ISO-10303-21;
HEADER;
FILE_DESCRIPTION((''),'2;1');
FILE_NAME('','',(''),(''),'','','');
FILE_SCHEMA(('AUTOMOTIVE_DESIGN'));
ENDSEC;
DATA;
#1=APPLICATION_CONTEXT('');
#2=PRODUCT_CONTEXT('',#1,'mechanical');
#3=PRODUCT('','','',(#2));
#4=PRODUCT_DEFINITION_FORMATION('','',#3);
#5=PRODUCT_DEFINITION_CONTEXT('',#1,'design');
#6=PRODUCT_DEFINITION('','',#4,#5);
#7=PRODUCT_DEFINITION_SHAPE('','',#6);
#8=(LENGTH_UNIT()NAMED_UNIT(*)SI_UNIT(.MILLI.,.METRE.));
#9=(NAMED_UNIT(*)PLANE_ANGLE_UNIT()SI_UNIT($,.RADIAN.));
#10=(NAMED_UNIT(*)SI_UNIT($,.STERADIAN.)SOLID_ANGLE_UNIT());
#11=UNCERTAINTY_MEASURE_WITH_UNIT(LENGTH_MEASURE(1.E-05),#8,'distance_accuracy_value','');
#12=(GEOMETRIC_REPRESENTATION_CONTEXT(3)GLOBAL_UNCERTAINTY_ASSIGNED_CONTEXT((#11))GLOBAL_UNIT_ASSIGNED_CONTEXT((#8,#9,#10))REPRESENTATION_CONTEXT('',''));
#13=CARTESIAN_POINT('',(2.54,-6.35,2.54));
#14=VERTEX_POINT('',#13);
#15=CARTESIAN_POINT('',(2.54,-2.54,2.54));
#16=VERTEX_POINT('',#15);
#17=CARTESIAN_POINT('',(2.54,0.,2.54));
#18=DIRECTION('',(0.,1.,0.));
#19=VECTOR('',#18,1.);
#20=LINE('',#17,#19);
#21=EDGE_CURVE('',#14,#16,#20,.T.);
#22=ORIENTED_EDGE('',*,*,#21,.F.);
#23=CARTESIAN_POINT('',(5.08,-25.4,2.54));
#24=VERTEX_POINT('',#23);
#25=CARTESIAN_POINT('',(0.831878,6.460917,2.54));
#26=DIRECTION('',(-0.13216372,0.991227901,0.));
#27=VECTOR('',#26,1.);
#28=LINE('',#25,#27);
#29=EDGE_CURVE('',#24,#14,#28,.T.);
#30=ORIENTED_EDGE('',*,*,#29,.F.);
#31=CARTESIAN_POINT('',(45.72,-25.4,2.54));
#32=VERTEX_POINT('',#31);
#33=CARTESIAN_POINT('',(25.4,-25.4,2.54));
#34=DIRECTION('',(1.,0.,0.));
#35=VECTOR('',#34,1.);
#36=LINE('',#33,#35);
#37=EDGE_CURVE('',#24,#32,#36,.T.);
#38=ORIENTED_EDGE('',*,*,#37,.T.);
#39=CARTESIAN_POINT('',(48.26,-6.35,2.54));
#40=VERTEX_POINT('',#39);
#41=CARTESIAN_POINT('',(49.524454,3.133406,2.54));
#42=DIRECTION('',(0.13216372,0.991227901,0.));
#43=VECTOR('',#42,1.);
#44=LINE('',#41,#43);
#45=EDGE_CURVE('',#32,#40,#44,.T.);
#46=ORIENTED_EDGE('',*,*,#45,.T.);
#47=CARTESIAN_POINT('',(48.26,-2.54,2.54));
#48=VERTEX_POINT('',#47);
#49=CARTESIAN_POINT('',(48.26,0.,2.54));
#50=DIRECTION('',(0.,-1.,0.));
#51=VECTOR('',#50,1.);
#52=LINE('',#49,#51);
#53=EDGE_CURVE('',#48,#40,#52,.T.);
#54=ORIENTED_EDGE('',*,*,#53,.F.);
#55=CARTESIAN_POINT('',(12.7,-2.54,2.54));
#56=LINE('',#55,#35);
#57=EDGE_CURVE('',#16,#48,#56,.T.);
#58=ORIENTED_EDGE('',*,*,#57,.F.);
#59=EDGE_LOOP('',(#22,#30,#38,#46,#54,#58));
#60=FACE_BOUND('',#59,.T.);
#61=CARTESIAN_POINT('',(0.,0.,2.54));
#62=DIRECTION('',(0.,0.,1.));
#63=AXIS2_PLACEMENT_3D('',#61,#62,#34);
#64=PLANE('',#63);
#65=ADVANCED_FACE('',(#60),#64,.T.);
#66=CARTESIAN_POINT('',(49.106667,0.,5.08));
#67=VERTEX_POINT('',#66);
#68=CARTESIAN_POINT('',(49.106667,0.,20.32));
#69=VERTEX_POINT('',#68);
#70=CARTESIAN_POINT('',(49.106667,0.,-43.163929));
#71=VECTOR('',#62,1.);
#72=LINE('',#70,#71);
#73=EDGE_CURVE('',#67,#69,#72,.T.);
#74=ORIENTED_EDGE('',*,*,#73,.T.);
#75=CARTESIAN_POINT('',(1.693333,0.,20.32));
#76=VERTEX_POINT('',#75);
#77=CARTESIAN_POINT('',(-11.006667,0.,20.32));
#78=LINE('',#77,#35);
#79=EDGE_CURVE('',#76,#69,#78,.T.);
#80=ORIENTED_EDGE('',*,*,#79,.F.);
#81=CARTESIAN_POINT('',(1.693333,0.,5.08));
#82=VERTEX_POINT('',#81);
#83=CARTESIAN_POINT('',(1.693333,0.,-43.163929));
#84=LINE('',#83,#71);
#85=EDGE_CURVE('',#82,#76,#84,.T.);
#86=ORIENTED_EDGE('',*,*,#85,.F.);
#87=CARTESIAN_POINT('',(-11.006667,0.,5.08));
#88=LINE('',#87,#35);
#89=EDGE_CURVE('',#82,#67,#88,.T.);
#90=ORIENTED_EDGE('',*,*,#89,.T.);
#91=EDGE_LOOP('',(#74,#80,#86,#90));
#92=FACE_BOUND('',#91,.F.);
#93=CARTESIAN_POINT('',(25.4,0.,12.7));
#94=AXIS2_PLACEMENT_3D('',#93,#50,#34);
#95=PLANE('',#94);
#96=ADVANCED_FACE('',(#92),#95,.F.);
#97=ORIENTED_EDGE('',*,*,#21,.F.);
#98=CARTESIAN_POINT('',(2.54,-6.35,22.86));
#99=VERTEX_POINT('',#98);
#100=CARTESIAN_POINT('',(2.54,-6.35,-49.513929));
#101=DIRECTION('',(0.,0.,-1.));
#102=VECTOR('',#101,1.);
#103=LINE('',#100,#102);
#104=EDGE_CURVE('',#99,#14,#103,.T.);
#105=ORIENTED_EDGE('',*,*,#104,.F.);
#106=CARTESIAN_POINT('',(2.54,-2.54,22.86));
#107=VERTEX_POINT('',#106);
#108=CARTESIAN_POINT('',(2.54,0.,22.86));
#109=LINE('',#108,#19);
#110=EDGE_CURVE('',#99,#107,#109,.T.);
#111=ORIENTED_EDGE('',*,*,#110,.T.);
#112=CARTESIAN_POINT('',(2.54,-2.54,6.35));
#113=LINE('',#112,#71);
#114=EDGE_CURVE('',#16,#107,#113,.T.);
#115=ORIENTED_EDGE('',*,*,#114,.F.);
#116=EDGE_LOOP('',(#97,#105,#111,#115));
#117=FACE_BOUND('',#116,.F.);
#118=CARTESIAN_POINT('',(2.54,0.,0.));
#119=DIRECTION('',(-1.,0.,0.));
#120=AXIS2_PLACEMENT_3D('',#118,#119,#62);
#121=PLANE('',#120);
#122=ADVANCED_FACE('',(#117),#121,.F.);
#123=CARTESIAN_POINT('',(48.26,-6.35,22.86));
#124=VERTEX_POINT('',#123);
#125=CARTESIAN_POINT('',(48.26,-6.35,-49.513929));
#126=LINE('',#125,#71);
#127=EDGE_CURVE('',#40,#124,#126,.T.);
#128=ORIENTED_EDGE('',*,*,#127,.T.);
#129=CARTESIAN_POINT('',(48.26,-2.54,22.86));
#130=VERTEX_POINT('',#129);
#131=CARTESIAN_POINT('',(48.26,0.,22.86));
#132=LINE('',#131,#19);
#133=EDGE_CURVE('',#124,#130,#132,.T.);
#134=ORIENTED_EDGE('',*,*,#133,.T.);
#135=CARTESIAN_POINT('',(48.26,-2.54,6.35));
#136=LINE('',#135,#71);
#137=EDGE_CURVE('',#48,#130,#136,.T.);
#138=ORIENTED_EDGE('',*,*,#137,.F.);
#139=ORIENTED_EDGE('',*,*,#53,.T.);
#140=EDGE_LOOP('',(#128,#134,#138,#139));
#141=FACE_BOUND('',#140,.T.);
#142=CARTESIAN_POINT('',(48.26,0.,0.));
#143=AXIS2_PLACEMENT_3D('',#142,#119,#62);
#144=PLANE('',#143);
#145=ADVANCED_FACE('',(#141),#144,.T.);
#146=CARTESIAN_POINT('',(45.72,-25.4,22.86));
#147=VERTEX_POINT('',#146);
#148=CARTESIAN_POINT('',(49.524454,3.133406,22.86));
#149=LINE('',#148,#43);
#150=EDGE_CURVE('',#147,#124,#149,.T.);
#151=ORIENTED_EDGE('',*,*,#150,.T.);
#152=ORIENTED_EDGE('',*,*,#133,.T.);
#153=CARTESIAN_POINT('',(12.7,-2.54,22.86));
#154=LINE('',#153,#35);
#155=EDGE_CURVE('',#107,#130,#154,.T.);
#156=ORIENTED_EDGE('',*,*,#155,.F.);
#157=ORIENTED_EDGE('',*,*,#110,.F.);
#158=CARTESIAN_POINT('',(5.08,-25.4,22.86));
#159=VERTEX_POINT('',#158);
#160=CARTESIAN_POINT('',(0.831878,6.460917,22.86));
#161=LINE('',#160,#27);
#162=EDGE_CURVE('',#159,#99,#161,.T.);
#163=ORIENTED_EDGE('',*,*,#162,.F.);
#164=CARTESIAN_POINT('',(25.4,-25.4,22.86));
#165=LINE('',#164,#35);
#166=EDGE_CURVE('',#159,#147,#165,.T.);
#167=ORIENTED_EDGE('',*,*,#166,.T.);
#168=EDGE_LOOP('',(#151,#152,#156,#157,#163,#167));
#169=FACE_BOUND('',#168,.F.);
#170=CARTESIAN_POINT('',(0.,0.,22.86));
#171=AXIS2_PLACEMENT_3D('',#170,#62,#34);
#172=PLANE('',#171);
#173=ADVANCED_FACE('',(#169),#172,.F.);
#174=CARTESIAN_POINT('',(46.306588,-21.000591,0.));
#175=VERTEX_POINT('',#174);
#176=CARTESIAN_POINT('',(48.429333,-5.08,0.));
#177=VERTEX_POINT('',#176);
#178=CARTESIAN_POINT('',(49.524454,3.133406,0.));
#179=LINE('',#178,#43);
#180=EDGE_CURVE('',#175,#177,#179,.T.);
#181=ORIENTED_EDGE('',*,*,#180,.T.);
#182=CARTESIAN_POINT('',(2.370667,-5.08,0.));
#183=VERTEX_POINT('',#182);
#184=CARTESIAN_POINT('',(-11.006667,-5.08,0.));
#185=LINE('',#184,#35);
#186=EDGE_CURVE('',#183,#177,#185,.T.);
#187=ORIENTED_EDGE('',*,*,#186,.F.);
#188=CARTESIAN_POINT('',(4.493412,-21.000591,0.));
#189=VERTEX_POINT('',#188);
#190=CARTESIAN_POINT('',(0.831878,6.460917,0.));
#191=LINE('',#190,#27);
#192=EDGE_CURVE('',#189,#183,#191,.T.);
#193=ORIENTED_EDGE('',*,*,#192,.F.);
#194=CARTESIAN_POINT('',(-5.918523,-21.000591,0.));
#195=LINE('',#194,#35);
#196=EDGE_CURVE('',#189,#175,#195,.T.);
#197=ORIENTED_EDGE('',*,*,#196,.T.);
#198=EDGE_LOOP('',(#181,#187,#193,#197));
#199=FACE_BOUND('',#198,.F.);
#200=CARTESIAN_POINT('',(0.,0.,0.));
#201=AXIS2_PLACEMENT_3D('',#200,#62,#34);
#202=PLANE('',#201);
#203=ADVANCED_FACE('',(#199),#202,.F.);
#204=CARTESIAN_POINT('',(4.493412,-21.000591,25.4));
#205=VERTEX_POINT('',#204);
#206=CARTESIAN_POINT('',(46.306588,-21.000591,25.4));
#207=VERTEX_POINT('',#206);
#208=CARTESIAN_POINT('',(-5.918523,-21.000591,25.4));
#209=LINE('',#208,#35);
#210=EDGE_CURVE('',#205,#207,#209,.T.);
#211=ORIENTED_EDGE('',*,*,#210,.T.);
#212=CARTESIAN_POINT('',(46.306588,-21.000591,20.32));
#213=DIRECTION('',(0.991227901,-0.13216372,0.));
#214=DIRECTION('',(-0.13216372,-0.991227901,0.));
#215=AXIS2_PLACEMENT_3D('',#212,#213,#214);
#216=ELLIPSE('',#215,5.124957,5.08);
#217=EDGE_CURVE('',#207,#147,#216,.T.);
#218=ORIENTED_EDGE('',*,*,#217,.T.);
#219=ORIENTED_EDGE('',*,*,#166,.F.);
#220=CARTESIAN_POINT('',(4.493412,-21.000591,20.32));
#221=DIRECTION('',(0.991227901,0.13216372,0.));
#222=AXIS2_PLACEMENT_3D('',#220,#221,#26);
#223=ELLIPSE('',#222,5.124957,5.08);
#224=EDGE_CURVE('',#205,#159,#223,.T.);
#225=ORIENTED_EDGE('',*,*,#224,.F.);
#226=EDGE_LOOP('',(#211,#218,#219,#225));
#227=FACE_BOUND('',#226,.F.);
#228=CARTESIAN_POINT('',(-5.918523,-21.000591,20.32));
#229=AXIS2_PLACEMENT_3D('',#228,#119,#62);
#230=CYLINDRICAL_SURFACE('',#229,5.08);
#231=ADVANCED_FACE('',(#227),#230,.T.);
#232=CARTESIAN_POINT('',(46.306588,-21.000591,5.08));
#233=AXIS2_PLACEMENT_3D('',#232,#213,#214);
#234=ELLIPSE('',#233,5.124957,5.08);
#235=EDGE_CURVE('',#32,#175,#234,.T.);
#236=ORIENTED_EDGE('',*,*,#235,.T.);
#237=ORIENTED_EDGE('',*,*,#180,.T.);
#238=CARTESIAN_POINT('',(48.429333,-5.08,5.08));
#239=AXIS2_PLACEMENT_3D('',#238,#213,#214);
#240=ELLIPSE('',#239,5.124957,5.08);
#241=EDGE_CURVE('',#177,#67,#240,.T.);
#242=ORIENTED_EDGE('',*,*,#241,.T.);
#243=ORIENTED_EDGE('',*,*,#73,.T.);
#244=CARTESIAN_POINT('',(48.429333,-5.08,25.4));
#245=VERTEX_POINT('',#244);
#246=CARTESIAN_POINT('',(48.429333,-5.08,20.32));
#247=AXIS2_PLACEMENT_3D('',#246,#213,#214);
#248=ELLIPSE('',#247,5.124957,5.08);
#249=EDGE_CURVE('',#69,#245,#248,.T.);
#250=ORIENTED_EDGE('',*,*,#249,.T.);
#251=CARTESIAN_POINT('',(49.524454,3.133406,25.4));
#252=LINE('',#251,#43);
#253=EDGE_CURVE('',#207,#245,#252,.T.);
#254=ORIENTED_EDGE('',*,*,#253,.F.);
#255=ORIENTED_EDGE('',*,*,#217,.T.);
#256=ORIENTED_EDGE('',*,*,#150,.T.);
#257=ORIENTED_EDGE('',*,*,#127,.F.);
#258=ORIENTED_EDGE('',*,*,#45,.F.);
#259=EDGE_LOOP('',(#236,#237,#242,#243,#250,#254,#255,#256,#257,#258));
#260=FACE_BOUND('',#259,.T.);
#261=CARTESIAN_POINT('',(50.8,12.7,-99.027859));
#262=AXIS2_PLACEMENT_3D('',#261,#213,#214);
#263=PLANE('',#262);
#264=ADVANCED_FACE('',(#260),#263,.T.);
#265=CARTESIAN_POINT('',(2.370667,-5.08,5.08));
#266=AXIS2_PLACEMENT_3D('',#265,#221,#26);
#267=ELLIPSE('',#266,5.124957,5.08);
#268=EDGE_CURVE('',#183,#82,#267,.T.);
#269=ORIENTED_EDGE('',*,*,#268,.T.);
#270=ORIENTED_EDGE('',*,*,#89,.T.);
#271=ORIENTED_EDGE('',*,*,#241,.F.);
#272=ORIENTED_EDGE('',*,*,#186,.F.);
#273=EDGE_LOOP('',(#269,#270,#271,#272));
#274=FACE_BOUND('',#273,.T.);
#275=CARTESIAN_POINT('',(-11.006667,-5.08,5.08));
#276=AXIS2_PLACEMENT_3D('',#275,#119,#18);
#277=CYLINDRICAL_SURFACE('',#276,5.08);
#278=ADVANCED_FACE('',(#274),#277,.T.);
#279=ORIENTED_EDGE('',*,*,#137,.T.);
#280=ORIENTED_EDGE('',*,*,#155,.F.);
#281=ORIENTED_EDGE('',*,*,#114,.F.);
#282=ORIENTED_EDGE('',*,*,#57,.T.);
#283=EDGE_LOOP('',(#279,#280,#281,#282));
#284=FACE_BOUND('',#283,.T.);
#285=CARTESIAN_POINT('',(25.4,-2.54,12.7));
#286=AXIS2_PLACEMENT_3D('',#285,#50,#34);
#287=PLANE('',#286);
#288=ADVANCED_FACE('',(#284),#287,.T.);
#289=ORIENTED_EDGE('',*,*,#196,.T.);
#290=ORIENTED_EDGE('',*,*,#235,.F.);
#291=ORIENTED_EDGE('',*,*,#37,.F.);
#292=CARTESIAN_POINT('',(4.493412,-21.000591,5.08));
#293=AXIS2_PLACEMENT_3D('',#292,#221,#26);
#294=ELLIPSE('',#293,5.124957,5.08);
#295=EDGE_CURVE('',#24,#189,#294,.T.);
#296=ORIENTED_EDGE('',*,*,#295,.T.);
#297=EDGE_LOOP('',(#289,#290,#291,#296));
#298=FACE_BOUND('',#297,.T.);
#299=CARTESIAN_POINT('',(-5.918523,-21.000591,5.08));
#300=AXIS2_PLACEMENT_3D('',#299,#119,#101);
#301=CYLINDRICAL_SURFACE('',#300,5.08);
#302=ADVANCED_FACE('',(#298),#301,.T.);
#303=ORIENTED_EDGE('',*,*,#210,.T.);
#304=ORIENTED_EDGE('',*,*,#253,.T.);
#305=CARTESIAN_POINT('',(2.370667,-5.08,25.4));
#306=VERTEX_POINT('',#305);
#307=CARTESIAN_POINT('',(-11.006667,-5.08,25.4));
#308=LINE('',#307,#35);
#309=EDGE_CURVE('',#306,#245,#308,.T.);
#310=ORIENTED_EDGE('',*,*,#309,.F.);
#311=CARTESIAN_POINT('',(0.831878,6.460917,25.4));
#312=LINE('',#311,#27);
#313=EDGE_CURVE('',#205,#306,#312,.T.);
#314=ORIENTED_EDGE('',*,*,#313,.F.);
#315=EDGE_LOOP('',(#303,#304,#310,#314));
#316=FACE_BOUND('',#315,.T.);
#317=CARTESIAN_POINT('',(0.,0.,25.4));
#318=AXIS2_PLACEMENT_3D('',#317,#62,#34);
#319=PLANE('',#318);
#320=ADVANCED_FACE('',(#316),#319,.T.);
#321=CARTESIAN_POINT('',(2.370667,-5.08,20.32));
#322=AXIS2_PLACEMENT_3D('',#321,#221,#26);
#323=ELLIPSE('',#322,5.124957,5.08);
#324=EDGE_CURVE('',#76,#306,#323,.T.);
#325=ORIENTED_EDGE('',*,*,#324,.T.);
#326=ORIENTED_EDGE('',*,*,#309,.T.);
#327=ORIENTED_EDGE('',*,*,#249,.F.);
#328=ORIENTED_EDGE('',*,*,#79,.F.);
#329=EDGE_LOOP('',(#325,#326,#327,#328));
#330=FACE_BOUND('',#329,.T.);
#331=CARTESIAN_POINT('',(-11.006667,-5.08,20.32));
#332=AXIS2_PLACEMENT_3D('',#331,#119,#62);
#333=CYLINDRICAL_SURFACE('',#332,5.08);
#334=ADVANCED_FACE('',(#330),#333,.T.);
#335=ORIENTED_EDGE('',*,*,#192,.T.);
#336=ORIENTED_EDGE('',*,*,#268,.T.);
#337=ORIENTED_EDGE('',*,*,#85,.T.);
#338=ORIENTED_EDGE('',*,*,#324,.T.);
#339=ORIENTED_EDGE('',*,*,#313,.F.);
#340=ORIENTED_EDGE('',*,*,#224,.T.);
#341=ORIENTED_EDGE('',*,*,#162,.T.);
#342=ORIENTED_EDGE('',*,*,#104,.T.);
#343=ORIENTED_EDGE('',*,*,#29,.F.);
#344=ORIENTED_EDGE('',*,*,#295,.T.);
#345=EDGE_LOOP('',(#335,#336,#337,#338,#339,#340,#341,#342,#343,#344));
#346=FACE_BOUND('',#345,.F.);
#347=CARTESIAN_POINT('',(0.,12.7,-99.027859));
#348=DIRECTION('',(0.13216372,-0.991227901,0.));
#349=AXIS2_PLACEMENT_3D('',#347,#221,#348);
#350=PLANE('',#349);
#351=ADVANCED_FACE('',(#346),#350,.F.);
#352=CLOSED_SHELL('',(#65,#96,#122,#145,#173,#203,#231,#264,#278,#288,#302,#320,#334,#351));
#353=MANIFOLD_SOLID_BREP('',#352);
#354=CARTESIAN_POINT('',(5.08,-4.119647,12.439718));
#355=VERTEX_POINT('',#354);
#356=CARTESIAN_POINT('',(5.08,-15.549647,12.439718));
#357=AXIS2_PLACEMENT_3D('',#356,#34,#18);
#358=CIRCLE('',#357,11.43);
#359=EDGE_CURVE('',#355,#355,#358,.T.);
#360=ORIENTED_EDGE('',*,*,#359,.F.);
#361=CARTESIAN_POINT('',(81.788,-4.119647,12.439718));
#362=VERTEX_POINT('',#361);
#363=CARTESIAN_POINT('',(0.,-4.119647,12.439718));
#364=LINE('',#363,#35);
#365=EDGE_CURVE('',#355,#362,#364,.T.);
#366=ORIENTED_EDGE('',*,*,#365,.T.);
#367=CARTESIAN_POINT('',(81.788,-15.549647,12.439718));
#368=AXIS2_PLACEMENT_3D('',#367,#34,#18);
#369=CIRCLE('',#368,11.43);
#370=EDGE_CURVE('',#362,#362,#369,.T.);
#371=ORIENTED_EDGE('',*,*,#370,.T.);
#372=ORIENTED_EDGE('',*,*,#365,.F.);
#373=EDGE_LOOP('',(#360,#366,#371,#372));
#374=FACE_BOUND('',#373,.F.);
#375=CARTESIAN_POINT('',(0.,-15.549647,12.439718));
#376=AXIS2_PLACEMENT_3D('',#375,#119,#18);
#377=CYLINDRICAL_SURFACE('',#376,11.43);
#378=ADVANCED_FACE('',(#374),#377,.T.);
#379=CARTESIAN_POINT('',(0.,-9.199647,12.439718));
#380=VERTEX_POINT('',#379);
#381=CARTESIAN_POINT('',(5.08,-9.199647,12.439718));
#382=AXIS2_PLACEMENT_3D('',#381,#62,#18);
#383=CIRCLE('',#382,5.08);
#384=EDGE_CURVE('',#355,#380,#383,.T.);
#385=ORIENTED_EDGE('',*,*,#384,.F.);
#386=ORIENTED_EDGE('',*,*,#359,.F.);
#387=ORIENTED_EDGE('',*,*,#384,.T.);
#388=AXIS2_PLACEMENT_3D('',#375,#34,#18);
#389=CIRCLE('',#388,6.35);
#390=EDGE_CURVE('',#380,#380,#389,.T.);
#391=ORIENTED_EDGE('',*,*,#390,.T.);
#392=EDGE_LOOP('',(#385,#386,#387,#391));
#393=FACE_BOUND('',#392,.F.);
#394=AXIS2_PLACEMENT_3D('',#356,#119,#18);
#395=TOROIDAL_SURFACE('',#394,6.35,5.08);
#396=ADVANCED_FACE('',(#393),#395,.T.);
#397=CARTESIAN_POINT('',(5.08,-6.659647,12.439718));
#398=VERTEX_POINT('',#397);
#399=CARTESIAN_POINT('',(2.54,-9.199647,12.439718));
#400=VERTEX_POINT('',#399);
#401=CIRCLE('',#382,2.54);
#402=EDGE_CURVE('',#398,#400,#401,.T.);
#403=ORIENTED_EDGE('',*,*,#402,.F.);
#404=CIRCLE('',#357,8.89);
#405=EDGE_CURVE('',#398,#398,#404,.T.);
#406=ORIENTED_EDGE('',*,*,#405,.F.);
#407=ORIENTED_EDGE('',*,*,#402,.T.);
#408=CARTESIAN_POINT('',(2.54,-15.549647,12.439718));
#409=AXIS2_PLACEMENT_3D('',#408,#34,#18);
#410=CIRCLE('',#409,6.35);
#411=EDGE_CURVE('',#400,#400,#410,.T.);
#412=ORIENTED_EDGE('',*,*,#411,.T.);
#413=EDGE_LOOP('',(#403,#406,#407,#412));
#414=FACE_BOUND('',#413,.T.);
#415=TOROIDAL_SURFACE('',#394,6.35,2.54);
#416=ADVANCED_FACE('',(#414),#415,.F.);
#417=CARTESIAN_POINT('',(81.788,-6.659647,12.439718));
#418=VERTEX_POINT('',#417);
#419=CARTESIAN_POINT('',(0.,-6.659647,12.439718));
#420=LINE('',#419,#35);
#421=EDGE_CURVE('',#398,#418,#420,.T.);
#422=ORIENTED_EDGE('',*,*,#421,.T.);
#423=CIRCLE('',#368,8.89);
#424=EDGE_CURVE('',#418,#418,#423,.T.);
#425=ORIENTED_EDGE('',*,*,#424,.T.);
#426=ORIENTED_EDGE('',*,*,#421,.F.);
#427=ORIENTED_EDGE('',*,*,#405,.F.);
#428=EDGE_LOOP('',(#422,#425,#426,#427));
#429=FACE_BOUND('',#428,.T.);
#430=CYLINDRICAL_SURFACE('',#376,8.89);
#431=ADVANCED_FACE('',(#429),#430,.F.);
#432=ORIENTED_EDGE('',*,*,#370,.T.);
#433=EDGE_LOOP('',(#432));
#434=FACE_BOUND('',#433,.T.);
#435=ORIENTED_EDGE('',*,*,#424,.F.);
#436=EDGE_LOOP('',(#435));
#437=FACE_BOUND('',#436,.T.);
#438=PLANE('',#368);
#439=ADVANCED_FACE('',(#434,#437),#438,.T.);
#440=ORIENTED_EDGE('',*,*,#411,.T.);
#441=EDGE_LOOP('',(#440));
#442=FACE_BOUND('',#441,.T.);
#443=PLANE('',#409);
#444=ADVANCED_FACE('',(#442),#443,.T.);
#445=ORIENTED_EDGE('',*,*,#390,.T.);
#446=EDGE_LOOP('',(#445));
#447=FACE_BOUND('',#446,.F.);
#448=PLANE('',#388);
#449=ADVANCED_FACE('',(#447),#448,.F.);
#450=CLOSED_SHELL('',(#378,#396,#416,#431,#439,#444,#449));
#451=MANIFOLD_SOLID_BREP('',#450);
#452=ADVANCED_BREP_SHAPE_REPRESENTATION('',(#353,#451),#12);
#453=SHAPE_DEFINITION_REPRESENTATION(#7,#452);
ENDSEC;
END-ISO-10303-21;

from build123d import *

# Parameters (mm, degrees)
F0_W        = 50.8
F0_H        = 25.4
F1_DEPTH    = 25.4
F2_T        = -2.54
F3_T1_DEPTH = 223.4557170743
F4_T1_DEPTH = 72.8133333333
F4_T3_DEPTH = 62.6370452561
F5_R        = 11.43
F6_DEPTH    = 81.788
F7_R        = 5.08
F8_T        = -2.54


# Not quite as in the source:
# - a fillet or chamfer that OpenCascade refuses, or shapes differently, is made with other operations: its cross-section is extruded or revolved along the edge and cut away or added


with BuildPart() as f1:
    # F0 (on Front) → F1 (new body)
    with BuildSketch(Plane.XZ):
        with Locations((25.4, 12.7)):
            Rectangle(F0_W, F0_H)
    extrude(amount=F1_DEPTH)

    # F2
    f2_openings = [f1.faces().sort_by_distance(p)[0] for p in [
        (25.4, -25.4, 12.7),
    ]]
    offset(amount=F2_T, openings=f2_openings)

    # F3: chamfer of 5.08 x 38.1 on 2 edges, made by hand

    # F3_s2 → F3_t1 (cut)
    with BuildSketch(Plane.XY.offset(-99.0278585372)):
        Polygon((50.8, 12.7), (45.72, -25.4), (50.8, -25.4), align=None)
        Polygon((0, 12.7), (5.08, -25.4), (0, -25.4), align=None)
    extrude(amount=F3_T1_DEPTH, mode=Mode.SUBTRACT)

    # F4: fillet of radius 5.08 on 4 edges, made by hand

    # F4_s2 → F4_t1 (cut)
    with BuildSketch(Plane.YZ.offset(-11.0066666667)):
        with BuildLine():
            ThreePointArc((-5.08, 25.4), (-1.4878975516, 23.9121024484), (0, 20.32))
            Line((0, 20.32), (0, 25.4))
            Line((0, 25.4), (-5.08, 25.4))
        make_face()
        with BuildLine():
            ThreePointArc((0, 5.08), (-1.4878975516, 1.4878975516), (-5.08, 0))
            Line((-5.08, 0), (0, 0))
            Line((0, 0), (0, 5.08))
        make_face()
    extrude(amount=F4_T1_DEPTH, mode=Mode.SUBTRACT)

    # F4_s4 → F4_t3 (cut)
    with BuildSketch(Plane.YZ.offset(-5.9185226281)):
        with BuildLine():
            ThreePointArc((-21.0005909488, 0), (-23.5405909488, 0.6805909488), (-25.4, 2.54))
            Line((-25.4, 2.54), (-25.4, 0))
            Line((-25.4, 0), (-21.0005909488, 0))
        make_face()
        with BuildLine():
            ThreePointArc((-21.0005909488, 25.4), (-23.5405909488, 24.7194090512), (-25.4, 22.86))
            Line((-25.4, 22.86), (-25.4, 25.4))
            Line((-25.4, 25.4), (-21.0005909488, 25.4))
        make_face()
    extrude(amount=F4_T3_DEPTH, mode=Mode.SUBTRACT)


with BuildPart() as f6:
    # F5 (on Right) → F6 (new body)
    with BuildSketch(Plane.YZ):
        with Locations((-15.5496466905, 12.4397175387)):
            Circle(F5_R)
    extrude(amount=F6_DEPTH)

    # F7
    f7_edges = [f6.edges().sort_by_distance(p)[0] for p in [
        (0, -26.979647, 12.439718),
    ]]
    fillet(f7_edges, radius=F7_R)

    # F8
    f8_openings = [f6.faces().sort_by_distance(p)[0] for p in [
        (81.788, -15.549647, 12.439718),
    ]]
    offset(amount=F8_T, openings=f8_openings)


solid = Compound([f1.part, f6.part])
